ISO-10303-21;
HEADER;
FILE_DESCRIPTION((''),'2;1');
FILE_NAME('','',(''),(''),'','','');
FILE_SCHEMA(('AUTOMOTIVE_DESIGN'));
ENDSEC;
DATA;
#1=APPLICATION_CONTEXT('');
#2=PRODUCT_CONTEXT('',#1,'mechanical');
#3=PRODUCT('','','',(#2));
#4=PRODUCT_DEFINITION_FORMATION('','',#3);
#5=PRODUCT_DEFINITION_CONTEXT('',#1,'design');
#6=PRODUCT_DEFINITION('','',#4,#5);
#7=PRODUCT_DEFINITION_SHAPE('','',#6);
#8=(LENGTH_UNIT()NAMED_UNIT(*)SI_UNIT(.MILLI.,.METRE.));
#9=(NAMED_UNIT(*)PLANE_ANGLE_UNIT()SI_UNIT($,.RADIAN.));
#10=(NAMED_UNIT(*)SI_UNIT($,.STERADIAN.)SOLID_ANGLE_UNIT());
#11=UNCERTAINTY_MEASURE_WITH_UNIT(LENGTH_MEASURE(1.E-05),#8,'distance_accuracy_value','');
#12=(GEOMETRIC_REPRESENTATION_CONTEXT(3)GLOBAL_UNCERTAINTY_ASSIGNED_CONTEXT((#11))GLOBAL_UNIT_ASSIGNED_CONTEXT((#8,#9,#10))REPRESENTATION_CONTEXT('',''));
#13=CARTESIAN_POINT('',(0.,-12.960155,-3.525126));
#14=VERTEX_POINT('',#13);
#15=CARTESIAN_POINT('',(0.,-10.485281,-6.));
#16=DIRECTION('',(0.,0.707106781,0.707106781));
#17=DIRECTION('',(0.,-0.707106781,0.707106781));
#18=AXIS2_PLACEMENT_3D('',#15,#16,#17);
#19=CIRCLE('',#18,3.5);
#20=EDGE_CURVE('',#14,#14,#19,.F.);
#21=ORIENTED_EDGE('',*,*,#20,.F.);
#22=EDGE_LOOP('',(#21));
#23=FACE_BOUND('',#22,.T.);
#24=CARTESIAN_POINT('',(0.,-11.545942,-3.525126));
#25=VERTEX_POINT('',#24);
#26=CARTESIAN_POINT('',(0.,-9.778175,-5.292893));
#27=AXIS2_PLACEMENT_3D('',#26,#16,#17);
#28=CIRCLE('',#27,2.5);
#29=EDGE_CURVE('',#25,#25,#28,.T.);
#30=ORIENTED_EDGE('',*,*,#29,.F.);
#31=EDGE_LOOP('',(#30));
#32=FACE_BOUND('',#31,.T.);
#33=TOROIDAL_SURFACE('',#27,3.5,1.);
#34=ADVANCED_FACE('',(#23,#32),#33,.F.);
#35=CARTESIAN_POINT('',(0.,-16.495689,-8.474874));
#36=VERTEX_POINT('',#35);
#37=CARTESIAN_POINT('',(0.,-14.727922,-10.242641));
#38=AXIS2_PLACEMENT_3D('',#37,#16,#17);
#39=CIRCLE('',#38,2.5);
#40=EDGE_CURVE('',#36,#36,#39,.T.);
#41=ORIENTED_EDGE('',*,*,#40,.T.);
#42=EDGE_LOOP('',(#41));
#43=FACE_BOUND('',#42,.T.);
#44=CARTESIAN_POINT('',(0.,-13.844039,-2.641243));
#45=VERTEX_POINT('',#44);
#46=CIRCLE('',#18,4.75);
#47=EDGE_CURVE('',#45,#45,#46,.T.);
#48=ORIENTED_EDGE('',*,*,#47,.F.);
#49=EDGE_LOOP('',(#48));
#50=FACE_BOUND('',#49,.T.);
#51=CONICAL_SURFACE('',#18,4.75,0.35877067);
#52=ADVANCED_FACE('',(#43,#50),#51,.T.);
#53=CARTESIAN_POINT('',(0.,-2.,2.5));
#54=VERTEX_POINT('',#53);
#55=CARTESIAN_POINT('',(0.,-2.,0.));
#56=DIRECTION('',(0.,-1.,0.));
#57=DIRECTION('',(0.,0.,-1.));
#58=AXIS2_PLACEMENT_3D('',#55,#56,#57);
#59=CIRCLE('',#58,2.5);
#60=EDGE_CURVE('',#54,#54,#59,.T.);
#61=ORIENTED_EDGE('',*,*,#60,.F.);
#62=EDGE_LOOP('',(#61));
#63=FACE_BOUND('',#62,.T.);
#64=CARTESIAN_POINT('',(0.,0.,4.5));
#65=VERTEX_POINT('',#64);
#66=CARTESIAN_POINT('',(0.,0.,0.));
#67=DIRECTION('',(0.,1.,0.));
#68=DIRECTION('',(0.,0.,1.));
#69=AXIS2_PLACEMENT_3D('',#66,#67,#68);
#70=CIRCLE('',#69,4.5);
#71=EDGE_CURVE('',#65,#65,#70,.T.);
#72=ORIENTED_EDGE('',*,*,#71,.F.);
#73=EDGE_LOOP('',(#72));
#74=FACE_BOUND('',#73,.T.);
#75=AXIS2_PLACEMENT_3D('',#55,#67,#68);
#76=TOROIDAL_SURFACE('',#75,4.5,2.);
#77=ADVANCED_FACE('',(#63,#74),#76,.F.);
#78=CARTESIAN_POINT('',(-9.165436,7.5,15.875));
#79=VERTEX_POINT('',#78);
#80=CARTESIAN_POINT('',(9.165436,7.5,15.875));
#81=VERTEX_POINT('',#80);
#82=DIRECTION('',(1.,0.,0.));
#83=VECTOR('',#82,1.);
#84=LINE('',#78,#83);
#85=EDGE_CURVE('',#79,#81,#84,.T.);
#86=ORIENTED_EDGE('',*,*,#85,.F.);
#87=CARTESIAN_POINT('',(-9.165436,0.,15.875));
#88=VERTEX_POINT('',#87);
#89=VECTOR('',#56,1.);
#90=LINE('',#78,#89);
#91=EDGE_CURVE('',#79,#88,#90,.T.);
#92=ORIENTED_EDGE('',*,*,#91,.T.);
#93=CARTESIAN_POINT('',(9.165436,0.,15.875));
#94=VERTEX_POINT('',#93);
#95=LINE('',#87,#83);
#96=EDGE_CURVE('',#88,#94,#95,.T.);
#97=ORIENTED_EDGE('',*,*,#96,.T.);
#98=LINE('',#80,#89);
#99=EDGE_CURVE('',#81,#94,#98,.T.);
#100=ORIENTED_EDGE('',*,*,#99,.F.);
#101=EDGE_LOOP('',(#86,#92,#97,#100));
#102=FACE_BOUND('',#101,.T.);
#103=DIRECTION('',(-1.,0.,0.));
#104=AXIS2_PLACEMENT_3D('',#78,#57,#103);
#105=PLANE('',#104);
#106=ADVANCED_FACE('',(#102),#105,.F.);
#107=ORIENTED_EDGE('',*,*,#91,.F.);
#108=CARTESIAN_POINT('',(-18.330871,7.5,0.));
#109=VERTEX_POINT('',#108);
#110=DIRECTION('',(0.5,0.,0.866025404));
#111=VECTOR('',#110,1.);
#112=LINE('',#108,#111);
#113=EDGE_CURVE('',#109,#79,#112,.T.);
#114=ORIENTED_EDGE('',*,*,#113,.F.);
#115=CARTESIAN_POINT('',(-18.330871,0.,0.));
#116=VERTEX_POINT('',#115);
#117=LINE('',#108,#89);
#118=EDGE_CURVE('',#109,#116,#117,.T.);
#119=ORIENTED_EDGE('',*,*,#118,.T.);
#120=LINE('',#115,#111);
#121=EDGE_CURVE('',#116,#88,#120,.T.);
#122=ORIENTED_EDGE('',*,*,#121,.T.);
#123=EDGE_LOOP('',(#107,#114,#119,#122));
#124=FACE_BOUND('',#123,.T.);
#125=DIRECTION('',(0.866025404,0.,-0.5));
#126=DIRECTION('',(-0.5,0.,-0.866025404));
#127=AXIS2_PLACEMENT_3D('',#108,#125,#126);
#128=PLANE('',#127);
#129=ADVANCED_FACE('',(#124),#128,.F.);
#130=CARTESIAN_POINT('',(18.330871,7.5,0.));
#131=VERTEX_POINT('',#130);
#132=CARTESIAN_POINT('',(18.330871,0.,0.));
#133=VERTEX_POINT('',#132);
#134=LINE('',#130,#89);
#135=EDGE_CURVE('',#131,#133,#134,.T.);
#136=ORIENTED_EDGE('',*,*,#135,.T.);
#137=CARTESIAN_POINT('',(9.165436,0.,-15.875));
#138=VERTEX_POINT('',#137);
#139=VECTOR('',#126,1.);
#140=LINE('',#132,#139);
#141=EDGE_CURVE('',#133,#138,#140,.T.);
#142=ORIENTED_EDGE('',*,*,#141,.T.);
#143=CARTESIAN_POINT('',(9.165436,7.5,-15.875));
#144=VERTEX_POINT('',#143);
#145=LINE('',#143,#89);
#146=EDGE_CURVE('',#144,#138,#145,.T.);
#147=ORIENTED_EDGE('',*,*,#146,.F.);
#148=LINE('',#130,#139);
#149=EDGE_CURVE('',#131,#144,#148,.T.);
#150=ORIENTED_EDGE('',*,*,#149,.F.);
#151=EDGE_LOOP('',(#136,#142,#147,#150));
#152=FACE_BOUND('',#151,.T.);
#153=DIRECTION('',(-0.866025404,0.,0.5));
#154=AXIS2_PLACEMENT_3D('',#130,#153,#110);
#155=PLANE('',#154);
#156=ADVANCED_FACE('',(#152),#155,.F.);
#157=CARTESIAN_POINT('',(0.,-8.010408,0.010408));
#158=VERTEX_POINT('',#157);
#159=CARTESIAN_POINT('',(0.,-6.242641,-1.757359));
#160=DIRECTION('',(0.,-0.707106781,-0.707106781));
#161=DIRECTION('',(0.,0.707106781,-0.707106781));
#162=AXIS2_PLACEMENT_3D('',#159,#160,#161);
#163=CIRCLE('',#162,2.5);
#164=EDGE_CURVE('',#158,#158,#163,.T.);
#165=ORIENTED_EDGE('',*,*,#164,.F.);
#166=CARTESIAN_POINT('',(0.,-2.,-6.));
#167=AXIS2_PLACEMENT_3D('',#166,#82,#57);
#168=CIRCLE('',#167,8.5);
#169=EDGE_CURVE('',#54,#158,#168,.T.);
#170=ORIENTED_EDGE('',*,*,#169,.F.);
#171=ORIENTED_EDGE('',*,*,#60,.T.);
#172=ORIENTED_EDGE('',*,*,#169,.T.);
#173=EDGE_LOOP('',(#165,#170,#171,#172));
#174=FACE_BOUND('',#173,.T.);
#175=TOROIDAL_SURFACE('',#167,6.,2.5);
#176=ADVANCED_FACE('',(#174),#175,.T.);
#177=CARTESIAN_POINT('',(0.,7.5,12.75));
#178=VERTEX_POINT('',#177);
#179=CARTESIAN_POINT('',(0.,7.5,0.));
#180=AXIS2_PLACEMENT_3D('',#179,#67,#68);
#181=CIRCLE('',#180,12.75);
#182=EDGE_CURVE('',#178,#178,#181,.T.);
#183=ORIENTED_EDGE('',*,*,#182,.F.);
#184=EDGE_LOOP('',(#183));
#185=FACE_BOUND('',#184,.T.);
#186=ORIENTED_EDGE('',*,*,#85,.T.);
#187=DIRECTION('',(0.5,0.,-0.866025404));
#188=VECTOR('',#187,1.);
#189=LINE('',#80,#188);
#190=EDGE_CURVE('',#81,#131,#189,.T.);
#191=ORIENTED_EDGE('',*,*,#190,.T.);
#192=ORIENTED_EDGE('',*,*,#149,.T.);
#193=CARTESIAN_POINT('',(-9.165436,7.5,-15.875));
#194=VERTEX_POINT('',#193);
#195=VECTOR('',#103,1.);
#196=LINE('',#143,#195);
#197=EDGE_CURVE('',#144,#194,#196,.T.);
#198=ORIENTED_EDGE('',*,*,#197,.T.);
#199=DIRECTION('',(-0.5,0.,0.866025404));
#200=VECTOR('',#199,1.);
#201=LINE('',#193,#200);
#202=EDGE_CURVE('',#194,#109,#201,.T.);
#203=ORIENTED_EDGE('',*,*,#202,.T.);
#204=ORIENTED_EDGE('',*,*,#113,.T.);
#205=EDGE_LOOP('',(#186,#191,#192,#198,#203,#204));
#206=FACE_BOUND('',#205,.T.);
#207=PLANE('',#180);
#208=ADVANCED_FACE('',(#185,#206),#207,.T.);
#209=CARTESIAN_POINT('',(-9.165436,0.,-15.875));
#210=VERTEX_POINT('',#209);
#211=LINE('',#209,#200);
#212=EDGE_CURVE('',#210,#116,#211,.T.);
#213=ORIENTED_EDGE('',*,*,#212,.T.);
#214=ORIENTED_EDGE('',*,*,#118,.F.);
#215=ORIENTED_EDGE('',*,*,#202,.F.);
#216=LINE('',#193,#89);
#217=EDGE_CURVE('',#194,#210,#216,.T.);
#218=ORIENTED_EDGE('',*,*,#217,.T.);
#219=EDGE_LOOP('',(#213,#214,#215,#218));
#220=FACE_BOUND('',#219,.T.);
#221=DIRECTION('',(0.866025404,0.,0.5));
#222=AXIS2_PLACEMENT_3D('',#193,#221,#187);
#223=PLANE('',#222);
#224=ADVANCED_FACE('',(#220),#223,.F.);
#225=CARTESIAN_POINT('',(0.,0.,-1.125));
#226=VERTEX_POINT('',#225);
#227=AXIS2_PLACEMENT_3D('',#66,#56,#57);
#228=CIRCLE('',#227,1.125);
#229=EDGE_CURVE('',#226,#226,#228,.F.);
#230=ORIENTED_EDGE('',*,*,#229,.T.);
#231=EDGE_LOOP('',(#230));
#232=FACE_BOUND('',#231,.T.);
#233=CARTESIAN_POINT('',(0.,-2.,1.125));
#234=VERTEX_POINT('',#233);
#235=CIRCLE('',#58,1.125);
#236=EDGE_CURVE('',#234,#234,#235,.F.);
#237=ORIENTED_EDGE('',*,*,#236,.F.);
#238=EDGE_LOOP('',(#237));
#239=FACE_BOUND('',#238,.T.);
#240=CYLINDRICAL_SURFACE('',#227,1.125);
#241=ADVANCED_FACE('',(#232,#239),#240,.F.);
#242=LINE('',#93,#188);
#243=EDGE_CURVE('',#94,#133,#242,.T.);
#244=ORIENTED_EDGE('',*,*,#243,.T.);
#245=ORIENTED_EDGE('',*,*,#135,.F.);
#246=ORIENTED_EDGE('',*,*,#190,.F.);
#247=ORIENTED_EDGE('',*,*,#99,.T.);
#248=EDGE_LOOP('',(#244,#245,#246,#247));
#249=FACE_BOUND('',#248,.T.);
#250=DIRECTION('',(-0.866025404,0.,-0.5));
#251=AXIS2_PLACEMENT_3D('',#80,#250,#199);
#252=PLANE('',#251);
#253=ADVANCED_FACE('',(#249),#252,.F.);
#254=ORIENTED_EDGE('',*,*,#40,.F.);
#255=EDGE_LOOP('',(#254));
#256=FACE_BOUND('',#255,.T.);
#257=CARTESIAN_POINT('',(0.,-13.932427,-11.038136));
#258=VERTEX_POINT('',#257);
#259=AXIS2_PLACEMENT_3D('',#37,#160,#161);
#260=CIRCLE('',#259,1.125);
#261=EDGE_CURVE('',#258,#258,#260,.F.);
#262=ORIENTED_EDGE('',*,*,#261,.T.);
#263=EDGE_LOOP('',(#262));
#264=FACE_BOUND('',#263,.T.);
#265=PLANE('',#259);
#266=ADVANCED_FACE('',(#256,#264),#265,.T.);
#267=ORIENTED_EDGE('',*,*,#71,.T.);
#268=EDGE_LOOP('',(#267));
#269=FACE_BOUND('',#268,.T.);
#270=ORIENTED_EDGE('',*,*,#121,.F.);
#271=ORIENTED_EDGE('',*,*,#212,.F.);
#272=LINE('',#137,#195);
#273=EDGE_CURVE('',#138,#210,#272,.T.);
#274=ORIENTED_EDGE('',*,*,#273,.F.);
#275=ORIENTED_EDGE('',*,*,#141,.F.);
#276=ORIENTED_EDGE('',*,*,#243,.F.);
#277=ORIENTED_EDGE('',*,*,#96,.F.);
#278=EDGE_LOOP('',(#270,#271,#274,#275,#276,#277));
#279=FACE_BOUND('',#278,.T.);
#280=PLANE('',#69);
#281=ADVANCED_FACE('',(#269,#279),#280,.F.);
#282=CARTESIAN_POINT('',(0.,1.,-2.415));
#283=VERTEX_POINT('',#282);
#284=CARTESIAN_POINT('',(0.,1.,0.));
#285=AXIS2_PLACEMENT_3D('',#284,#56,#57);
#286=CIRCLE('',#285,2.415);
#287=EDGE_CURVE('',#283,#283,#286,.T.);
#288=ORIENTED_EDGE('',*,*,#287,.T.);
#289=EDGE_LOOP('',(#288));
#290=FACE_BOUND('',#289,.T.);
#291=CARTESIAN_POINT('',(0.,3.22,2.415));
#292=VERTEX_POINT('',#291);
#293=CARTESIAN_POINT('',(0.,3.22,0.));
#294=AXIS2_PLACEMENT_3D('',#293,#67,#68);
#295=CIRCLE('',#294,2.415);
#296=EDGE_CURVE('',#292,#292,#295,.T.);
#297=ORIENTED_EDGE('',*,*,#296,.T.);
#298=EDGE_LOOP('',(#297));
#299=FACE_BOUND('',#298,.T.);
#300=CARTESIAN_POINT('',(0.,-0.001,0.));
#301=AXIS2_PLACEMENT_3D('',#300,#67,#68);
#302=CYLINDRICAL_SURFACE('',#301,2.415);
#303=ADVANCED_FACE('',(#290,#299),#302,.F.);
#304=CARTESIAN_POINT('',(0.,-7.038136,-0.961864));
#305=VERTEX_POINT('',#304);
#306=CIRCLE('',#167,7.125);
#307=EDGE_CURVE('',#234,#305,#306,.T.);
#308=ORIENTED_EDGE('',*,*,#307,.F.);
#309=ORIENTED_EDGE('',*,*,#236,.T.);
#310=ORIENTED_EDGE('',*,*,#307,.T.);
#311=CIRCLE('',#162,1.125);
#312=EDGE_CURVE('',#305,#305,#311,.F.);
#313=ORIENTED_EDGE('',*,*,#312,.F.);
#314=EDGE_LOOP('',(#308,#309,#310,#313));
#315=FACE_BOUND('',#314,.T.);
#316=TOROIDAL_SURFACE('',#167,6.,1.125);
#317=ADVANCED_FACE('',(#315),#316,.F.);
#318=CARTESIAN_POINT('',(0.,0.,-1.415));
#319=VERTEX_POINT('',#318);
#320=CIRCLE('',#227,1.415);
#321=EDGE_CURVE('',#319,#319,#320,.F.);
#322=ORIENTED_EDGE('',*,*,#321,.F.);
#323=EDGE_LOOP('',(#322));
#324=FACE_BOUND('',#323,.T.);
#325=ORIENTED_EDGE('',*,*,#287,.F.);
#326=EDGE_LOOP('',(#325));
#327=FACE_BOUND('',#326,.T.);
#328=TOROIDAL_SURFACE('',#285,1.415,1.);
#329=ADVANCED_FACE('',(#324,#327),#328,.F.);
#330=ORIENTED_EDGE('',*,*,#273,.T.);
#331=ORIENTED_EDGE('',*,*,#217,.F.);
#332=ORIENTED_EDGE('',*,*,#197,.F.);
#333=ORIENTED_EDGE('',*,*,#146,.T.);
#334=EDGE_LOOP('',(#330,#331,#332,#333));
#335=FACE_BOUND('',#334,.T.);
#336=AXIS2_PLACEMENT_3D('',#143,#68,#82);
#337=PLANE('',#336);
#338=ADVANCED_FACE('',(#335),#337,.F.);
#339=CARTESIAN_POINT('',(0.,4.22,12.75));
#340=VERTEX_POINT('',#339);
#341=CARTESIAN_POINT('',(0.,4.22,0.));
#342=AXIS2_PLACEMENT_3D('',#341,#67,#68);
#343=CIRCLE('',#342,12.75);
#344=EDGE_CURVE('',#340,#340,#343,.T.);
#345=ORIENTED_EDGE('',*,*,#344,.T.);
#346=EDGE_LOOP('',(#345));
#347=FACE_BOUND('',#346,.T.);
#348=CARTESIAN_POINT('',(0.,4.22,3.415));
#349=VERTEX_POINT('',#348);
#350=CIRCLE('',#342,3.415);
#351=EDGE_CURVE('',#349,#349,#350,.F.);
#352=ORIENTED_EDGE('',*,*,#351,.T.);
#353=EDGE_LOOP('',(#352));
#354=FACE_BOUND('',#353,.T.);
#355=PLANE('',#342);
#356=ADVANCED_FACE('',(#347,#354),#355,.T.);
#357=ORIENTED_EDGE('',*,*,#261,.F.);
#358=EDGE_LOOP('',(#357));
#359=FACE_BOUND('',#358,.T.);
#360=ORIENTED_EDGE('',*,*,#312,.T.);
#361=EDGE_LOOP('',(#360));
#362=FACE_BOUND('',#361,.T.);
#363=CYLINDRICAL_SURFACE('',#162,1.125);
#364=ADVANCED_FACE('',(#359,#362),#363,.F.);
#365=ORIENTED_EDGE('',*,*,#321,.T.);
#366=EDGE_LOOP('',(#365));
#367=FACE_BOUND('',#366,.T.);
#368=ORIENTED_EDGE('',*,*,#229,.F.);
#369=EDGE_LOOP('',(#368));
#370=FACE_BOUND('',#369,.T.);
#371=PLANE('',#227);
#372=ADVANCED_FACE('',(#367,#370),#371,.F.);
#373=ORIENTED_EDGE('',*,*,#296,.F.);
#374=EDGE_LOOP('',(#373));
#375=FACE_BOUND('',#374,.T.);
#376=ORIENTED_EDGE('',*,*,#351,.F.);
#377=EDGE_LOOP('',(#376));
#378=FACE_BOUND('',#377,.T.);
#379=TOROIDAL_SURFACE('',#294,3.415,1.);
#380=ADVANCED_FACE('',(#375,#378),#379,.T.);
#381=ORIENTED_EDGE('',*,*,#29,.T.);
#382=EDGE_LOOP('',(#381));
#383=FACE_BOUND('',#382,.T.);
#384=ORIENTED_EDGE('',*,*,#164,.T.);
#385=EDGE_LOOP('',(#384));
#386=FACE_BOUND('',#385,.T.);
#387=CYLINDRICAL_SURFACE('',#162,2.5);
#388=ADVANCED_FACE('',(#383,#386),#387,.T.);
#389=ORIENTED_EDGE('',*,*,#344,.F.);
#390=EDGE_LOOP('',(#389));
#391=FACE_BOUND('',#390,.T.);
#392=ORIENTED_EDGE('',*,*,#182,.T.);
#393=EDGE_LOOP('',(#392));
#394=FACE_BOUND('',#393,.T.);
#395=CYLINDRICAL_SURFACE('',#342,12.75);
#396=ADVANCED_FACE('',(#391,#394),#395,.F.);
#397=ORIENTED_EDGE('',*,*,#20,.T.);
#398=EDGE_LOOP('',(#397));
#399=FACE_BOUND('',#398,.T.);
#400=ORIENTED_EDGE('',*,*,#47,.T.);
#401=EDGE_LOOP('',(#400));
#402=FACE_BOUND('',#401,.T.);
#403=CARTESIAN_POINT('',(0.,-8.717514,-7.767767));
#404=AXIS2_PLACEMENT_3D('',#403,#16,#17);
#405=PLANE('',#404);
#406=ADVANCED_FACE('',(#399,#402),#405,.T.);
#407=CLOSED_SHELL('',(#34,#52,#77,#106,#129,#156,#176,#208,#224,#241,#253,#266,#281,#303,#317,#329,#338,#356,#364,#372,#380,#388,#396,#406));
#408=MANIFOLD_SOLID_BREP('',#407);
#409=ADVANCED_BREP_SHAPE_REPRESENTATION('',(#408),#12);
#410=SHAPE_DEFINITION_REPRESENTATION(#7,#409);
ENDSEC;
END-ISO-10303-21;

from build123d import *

# Parameters (mm, degrees)
MAINHOLDER_DEPTH   = 7.5
SKETCH12_R         = 12.75
MAGNETCUTOUT_DEPTH = 3.28
MAGNETHOLE_REACH   = 26.614
SKETCH13_R         = 2.415
DRAINOPENING_R     = 2.5
DRAINOPENING_R_2   = 1.125
DRAINBASEFILLET_R  = 2
BARBBASEFILLET_R   = 1
DRAINOPENFILLET_R  = 1
MAGNETFILLET_R     = 1


with BuildPart() as part:
    # Sketch11 → MainHolder (new body)
    with BuildSketch(Plane(origin=(0, 0, 0), x_dir=(1, 0, 0), z_dir=(0, 1, 0))):
        Polygon((18.330871047, 0), (9.165435523, 15.875), (-9.165435523, 15.875), (-18.330871047, 0), (-9.165435523, -15.875), (9.165435523, -15.875), align=None)
    extrude(amount=MAINHOLDER_DEPTH)

    # Sketch12 → MagnetCutout (cut)
    with BuildSketch(Plane(origin=(0, 7.5, 0), x_dir=(1, 0, 0), z_dir=(0, 1, 0))):
        with Locations(Location((0, 0, 0), (0, 0, 270))):
            Circle(SKETCH12_R)
    extrude(amount=-MAGNETCUTOUT_DEPTH, mode=Mode.SUBTRACT)

    # Sketch13 → MagnetHole (cut, up to next)
    with BuildSketch(Plane(origin=(0, 4.22, 0), x_dir=(1, 0, 0), z_dir=(0, 1, 0)), mode=Mode.PRIVATE) as magnethole_sk1:
        with Locations(Location((0, 0, 0), (0, 0, 270))):
            Circle(SKETCH13_R)
    magnethole_tool1 = extrude(magnethole_sk1.sketch, amount=-MAGNETHOLE_REACH, mode=Mode.PRIVATE) & part.part
    add(magnethole_tool1.solids().sort_by_distance((0, 4.22, 0))[0], mode=Mode.SUBTRACT)

    # Drain: sweep along a path in DrainPath
    with BuildLine(Plane(origin=(0, 0, 0), x_dir=(0, 0, -1), z_dir=(1, 0, 0))) as drain_path:
        Line((0, 0), (0, -2))
        ThreePointArc((0, -2), (0.456722805, -4.296100594), (1.757359313, -6.242640687))
        Line((1.757359313, -6.242640687), (10.242640687, -14.727922061))
    # DrainOpening → Drain (sweep)
    with BuildSketch(Plane.XZ):
        Circle(DRAINOPENING_R)
        Circle(DRAINOPENING_R_2, mode=Mode.SUBTRACT)
    sweep(path=drain_path.line)

    # BarbOutline → Barb (revolve)
    with BuildSketch(Plane(origin=(0, 0, 0), x_dir=(0, -0.7071067811865461, -0.7071067811865489), z_dir=(-1, 0, 0)), mode=Mode.PRIVATE) as barb_sk:
        Polygon((17.656854249, 0.671572875), (11.656854249, 0.671572875), (11.656854249, -1.578427125), align=None)
    revolve(barb_sk.sketch.rotate(Axis((0, -5.447145558, -0.961864184), (0, -0.7071067811865461, -0.707106781186549)), 180), axis=Axis((0, -5.447145558, -0.961864184), (0, -0.7071067811865461, -0.707106781186549)))

    # DrainBaseFillet
    drainbasefillet_edges = [part.edges().sort_by_distance(p)[0] for p in [
        (-2.5, 0, 0),
    ]]
    fillet(drainbasefillet_edges, radius=DRAINBASEFILLET_R - 0.0001)  # a hair under: the kernel refuses the full size

    # BarbBaseFillet
    barbbasefillet_edges = [part.edges().sort_by_distance(p)[0] for p in [
        (-2.5, -10.485281374, -6),
    ]]
    fillet(barbbasefillet_edges, radius=BARBBASEFILLET_R)

    # DrainOpenFillet
    drainopenfillet_edges = [part.edges().sort_by_distance(p)[0] for p in [
        (0, 0, -2.415),
    ]]
    fillet(drainopenfillet_edges, radius=DRAINOPENFILLET_R)

    # MagnetFillet
    magnetfillet_edges = [part.edges().sort_by_distance(p)[0] for p in [
        (0, 4.22, -2.415),
    ]]
    fillet(magnetfillet_edges, radius=MAGNETFILLET_R)


solid = part.part
